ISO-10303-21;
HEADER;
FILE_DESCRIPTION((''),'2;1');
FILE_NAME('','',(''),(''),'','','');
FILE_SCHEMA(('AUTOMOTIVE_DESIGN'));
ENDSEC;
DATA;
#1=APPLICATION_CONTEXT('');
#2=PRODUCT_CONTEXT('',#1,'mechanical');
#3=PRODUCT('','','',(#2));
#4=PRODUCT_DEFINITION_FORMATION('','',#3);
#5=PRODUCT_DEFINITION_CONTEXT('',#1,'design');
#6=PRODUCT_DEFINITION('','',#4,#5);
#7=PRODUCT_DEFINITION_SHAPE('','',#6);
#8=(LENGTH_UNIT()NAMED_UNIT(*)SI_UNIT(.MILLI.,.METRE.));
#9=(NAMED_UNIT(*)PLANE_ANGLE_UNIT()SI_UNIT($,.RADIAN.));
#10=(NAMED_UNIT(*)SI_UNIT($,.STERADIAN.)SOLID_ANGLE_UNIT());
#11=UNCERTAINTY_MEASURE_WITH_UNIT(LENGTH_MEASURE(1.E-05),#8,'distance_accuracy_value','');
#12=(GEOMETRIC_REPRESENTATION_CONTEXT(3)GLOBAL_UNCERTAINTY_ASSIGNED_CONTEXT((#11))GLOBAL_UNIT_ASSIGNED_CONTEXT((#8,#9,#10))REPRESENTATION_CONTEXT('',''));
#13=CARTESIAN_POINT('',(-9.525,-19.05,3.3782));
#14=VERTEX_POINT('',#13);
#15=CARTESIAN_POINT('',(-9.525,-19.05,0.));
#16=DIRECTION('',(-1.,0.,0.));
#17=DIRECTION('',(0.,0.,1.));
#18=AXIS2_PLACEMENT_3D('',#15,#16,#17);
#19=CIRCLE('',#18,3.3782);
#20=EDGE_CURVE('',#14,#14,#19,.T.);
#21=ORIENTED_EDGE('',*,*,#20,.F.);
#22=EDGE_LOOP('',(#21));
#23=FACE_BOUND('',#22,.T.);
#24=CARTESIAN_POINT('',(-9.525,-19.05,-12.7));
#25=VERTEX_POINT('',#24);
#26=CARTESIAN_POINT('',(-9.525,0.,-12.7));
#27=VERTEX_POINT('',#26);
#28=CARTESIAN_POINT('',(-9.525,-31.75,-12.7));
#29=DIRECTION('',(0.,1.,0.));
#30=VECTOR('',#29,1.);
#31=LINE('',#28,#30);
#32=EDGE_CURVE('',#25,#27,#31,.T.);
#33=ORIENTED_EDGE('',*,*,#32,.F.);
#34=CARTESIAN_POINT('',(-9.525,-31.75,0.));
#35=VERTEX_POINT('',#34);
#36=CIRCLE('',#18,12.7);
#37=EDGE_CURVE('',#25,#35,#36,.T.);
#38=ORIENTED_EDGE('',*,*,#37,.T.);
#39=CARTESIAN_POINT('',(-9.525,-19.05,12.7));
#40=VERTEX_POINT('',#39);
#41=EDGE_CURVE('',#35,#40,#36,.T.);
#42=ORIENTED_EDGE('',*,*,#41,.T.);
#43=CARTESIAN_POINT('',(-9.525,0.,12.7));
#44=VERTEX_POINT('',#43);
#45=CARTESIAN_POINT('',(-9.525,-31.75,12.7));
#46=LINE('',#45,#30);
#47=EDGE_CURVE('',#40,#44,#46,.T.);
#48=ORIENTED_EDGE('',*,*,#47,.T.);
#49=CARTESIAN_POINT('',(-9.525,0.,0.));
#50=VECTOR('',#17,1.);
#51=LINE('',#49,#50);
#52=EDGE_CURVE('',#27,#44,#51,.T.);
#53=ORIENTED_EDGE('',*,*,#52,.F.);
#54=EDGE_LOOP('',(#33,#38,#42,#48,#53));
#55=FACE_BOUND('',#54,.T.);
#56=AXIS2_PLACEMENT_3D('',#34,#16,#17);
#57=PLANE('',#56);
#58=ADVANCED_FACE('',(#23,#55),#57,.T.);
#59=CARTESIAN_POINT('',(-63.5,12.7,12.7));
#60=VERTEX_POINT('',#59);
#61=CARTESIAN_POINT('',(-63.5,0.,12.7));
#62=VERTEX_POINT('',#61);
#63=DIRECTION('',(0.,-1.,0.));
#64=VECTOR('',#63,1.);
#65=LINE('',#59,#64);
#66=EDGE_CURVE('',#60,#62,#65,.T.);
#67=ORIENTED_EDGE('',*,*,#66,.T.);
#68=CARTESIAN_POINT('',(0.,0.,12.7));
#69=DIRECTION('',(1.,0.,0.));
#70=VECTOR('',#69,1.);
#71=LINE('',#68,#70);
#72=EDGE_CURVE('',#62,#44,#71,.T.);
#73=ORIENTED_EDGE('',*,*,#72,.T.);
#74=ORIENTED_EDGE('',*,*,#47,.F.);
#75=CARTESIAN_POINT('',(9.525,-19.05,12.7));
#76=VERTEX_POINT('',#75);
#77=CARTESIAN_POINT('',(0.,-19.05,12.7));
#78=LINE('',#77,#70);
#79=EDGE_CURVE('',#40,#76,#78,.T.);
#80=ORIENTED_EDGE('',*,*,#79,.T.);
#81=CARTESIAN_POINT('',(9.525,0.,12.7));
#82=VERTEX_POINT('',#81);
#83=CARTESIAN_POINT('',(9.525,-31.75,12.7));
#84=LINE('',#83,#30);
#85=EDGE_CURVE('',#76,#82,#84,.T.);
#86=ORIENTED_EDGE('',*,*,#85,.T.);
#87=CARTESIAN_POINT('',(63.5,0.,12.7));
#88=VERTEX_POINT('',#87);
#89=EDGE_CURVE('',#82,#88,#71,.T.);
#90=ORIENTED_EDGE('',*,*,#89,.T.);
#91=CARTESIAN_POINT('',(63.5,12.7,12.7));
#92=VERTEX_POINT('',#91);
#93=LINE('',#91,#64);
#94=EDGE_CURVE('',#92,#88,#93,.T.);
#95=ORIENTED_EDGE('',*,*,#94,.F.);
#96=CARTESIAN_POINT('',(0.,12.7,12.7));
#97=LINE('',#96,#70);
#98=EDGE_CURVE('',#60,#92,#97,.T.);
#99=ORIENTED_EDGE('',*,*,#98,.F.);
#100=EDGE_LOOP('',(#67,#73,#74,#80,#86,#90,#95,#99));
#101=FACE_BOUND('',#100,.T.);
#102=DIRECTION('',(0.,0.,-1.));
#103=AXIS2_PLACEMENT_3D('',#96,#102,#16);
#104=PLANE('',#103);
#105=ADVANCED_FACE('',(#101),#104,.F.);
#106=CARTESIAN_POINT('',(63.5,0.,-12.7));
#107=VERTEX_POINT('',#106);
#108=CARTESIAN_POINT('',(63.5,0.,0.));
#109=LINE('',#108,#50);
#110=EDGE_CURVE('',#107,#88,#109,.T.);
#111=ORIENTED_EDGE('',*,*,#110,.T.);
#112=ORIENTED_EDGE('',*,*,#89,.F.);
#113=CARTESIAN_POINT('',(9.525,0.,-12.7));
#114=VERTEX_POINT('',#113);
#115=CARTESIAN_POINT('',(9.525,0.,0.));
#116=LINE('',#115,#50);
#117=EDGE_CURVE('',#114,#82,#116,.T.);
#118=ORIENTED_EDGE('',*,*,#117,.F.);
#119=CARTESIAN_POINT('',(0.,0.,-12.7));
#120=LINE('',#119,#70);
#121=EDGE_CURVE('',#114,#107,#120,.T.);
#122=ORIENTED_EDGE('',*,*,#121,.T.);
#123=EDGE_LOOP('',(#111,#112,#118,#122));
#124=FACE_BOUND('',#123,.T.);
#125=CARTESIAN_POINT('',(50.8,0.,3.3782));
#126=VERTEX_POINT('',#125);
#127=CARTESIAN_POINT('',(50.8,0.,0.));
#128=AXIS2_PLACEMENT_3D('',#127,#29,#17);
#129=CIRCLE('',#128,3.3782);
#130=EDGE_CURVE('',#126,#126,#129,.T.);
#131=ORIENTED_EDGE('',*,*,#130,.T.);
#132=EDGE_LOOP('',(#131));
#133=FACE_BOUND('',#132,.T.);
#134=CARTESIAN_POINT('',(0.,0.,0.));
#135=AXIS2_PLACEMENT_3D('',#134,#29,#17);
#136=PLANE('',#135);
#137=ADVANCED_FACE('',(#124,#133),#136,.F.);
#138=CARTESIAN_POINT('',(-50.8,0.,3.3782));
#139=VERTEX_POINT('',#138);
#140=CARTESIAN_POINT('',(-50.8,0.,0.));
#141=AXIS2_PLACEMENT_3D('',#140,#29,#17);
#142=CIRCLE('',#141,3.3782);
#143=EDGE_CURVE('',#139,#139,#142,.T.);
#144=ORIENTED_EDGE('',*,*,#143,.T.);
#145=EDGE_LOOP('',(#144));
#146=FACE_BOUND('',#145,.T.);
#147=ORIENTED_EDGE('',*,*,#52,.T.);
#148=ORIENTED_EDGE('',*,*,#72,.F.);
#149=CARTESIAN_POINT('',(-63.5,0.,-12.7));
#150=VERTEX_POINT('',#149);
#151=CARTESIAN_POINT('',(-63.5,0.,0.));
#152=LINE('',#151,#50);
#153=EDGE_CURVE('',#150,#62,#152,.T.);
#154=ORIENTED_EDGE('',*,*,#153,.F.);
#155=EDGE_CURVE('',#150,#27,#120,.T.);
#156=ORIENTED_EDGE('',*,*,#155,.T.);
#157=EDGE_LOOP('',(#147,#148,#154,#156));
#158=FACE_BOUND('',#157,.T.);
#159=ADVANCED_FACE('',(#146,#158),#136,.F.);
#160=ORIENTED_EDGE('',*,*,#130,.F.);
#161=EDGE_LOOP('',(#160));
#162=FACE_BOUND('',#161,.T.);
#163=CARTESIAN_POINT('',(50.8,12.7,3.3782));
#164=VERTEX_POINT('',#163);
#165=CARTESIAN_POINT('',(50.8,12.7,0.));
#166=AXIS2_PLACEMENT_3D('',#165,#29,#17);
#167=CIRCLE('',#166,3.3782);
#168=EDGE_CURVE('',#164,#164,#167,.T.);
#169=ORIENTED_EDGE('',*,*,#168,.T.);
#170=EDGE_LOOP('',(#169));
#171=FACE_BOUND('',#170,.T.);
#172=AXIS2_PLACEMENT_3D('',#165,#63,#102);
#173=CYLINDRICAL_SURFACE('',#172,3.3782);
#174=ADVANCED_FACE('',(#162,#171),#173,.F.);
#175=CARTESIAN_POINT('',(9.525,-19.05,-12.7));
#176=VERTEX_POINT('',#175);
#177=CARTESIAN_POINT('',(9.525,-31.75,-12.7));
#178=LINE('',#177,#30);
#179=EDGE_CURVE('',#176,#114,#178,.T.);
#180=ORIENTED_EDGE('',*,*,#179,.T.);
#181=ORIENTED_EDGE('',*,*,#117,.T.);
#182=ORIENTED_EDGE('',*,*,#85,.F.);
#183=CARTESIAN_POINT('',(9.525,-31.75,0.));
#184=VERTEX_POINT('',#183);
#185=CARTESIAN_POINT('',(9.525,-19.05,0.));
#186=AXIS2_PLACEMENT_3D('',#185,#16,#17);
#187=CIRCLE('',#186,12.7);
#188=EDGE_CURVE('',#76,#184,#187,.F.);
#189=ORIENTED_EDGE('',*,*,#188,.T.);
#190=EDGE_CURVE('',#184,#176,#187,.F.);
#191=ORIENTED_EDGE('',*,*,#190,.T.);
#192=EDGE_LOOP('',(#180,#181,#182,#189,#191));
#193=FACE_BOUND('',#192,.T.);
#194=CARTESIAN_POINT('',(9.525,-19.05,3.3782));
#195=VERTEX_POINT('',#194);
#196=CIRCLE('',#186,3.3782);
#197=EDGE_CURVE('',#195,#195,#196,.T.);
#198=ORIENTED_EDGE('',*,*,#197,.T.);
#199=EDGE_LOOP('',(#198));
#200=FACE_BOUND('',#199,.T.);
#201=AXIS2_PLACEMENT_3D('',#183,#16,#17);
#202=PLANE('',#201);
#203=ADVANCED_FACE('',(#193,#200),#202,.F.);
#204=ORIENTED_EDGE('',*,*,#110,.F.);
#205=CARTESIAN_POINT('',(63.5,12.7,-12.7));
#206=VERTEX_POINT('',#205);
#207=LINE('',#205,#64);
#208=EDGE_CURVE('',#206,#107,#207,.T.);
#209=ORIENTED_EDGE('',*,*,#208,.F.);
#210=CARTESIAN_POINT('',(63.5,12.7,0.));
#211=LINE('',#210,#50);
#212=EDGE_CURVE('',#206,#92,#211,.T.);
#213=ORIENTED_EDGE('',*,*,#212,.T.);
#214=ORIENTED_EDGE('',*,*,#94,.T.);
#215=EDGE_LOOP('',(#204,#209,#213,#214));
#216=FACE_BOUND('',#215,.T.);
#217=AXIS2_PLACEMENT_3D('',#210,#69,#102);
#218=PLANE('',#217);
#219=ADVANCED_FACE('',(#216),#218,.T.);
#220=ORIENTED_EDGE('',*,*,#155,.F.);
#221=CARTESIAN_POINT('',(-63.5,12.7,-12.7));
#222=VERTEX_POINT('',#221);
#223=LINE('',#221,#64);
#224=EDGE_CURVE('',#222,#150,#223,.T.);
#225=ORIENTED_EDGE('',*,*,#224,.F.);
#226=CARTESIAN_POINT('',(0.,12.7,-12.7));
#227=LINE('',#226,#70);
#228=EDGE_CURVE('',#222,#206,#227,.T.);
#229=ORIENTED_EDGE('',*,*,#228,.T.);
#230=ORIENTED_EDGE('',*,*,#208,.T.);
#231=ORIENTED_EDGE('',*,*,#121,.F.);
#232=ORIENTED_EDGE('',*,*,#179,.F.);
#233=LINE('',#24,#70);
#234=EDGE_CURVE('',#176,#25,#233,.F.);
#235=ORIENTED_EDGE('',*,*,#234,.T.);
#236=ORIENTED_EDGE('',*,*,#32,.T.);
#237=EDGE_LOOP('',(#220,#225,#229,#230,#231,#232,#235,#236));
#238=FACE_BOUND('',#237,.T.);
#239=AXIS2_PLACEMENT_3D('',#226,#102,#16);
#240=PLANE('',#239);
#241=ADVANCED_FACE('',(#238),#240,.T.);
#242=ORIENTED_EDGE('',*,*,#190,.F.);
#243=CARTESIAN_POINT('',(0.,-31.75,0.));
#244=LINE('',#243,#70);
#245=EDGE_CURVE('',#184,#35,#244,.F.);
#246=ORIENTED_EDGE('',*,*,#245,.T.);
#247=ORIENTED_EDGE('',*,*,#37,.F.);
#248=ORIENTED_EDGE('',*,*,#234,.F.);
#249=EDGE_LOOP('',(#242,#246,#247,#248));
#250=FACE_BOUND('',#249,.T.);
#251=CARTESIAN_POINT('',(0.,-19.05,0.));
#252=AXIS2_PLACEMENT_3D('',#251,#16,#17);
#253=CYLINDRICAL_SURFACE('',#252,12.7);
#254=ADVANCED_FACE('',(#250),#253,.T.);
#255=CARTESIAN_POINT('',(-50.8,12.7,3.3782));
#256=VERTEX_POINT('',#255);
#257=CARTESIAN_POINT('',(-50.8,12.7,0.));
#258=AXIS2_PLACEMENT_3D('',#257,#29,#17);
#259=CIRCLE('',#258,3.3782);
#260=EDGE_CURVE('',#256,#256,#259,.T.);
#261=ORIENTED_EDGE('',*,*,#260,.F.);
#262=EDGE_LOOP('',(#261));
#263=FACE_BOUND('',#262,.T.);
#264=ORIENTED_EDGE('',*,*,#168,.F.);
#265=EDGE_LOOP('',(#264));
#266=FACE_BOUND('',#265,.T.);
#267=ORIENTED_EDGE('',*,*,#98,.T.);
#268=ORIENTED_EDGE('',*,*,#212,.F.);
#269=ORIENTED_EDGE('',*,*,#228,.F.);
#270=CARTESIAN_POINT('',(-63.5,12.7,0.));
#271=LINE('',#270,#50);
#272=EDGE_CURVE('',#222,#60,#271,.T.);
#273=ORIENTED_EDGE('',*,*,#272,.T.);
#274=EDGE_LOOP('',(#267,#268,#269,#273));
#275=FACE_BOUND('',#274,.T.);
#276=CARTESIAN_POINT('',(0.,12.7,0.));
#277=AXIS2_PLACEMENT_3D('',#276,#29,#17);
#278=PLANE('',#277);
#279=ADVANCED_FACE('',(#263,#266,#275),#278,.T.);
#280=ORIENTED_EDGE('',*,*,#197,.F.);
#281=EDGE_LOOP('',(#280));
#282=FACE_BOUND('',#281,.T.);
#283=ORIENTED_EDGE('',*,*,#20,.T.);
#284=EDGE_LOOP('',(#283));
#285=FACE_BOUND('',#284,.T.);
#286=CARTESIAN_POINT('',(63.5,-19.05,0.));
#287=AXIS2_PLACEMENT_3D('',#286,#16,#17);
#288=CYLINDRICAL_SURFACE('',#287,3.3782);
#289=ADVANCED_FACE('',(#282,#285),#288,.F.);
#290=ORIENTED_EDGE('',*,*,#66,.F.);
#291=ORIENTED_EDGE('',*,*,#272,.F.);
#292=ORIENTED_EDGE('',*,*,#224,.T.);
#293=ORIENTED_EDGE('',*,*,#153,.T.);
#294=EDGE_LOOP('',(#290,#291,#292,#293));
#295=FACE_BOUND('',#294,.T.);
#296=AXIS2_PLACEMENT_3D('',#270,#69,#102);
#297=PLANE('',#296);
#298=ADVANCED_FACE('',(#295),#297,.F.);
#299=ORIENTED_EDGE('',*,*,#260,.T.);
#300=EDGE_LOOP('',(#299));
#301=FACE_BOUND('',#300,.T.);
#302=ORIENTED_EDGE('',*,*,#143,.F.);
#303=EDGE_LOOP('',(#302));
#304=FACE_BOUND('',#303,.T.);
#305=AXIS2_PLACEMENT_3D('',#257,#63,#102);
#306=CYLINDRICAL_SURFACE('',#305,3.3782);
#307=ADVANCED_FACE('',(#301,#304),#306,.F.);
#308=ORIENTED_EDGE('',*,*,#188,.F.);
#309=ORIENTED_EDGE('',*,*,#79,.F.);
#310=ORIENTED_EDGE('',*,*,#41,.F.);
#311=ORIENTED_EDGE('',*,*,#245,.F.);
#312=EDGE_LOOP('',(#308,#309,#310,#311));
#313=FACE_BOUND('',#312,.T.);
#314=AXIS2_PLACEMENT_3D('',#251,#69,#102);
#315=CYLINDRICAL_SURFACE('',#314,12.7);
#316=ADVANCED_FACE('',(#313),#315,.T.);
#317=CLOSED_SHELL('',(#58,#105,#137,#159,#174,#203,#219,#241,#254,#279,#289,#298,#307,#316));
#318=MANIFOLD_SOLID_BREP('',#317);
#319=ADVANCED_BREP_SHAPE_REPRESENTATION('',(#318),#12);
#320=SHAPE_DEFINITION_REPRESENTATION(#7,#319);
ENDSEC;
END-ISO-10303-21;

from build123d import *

# Parameters (mm, degrees)
SKETCH1_W           = 19.05
SKETCH1_H           = 12.7
BOSS_EXTRUDE1_DEPTH = 12.7
SKETCH1_3_W         = 19.05
SKETCH1_3_H         = 12.7
BOSS_EXTRUDE2_DEPTH = 31.75
CUT_EXTRUDE1_DEPTH  = 81.63499938
FILLET1_R           = 12.7


with BuildPart() as part:
    # Sketch1 → Boss-Extrude1 (new body)
    with BuildSketch(Plane(origin=(0, 0, 0), x_dir=(1, 0, 0), z_dir=(0, 1, 0))):
        with BuildLine():
            Line((63.5, 12.7), (9.525, 12.7))
            Line((9.525, 12.7), (9.525, 0))
            Line((9.525, 0), (47.4218, 0))
            ThreePointArc((47.4218, 0), (50.8, 3.3782), (54.1782, 0))
            Line((54.1782, 0), (63.5, 0))
            Line((63.5, 0), (63.5, 12.7))
        make_face()
        with BuildLine():
            Line((47.4218, 0), (9.525, 0))
            Line((9.525, 0), (9.525, -12.7))
            Line((9.525, -12.7), (63.5, -12.7))
            Line((63.5, -12.7), (63.5, 0))
            Line((63.5, 0), (54.1782, 0))
            ThreePointArc((54.1782, 0), (50.8, -3.3782), (47.4218, 0))
        make_face()
        with Locations((0, -6.35)):
            Rectangle(SKETCH1_W, SKETCH1_H)
        with Locations((0, 6.35)):
            Rectangle(SKETCH1_W, SKETCH1_H)
        with BuildLine():
            Line((-54.1782, 0), (-63.5, 0))
            Line((-63.5, 0), (-63.5, -12.7))
            Line((-63.5, -12.7), (-9.525, -12.7))
            Line((-9.525, -12.7), (-9.525, 0))
            Line((-9.525, 0), (-47.4218, 0))
            ThreePointArc((-47.4218, 0), (-50.8, -3.3782), (-54.1782, 0))
        make_face()
        with BuildLine():
            Line((-9.525, 12.7), (-63.5, 12.7))
            Line((-63.5, 12.7), (-63.5, 0))
            Line((-63.5, 0), (-54.1782, 0))
            ThreePointArc((-54.1782, 0), (-50.8, 3.3782), (-47.4218, 0))
            Line((-47.4218, 0), (-9.525, 0))
            Line((-9.525, 0), (-9.525, 12.7))
        make_face()
    extrude(amount=BOSS_EXTRUDE1_DEPTH)

    # Sketch1<3> → Boss-Extrude2 (add)
    with BuildSketch(Plane(origin=(0, 0, 0), x_dir=(1, 0, 0), z_dir=(0, 1, 0))):
        with Locations((0, -6.35)):
            Rectangle(SKETCH1_3_W, SKETCH1_3_H)
        with Locations((0, 6.35)):
            Rectangle(SKETCH1_3_W, SKETCH1_3_H)
    extrude(amount=-BOSS_EXTRUDE2_DEPTH)

    # Sketch2 → Cut-Extrude1 (cut, through all)
    with BuildSketch(Plane.ZY.offset(9.525)):
        with BuildLine():
            ThreePointArc((3.3782, -19.05), (2.388748128, -16.661251872), (0, -15.6718))
            Line((0, -15.6718), (0, -22.4282))
            ThreePointArc((0, -22.4282), (2.388748128, -21.438748128), (3.3782, -19.05))
        make_face()
        with BuildLine():
            Line((0, -22.4282), (0, -15.6718))
            ThreePointArc((0, -15.6718), (-3.3782, -19.05), (0, -22.4282))
        make_face()
    extrude(amount=-CUT_EXTRUDE1_DEPTH, mode=Mode.SUBTRACT)

    # Fillet1
    fillet1_edges = [part.edges().sort_by_distance(p)[0] for p in [
        (0, -31.75, -12.7),
        (0, -31.75, 12.7),
    ]]
    fillet(fillet1_edges, radius=FILLET1_R - 0.0001)  # a hair under: the kernel refuses the full size


solid = part.part
